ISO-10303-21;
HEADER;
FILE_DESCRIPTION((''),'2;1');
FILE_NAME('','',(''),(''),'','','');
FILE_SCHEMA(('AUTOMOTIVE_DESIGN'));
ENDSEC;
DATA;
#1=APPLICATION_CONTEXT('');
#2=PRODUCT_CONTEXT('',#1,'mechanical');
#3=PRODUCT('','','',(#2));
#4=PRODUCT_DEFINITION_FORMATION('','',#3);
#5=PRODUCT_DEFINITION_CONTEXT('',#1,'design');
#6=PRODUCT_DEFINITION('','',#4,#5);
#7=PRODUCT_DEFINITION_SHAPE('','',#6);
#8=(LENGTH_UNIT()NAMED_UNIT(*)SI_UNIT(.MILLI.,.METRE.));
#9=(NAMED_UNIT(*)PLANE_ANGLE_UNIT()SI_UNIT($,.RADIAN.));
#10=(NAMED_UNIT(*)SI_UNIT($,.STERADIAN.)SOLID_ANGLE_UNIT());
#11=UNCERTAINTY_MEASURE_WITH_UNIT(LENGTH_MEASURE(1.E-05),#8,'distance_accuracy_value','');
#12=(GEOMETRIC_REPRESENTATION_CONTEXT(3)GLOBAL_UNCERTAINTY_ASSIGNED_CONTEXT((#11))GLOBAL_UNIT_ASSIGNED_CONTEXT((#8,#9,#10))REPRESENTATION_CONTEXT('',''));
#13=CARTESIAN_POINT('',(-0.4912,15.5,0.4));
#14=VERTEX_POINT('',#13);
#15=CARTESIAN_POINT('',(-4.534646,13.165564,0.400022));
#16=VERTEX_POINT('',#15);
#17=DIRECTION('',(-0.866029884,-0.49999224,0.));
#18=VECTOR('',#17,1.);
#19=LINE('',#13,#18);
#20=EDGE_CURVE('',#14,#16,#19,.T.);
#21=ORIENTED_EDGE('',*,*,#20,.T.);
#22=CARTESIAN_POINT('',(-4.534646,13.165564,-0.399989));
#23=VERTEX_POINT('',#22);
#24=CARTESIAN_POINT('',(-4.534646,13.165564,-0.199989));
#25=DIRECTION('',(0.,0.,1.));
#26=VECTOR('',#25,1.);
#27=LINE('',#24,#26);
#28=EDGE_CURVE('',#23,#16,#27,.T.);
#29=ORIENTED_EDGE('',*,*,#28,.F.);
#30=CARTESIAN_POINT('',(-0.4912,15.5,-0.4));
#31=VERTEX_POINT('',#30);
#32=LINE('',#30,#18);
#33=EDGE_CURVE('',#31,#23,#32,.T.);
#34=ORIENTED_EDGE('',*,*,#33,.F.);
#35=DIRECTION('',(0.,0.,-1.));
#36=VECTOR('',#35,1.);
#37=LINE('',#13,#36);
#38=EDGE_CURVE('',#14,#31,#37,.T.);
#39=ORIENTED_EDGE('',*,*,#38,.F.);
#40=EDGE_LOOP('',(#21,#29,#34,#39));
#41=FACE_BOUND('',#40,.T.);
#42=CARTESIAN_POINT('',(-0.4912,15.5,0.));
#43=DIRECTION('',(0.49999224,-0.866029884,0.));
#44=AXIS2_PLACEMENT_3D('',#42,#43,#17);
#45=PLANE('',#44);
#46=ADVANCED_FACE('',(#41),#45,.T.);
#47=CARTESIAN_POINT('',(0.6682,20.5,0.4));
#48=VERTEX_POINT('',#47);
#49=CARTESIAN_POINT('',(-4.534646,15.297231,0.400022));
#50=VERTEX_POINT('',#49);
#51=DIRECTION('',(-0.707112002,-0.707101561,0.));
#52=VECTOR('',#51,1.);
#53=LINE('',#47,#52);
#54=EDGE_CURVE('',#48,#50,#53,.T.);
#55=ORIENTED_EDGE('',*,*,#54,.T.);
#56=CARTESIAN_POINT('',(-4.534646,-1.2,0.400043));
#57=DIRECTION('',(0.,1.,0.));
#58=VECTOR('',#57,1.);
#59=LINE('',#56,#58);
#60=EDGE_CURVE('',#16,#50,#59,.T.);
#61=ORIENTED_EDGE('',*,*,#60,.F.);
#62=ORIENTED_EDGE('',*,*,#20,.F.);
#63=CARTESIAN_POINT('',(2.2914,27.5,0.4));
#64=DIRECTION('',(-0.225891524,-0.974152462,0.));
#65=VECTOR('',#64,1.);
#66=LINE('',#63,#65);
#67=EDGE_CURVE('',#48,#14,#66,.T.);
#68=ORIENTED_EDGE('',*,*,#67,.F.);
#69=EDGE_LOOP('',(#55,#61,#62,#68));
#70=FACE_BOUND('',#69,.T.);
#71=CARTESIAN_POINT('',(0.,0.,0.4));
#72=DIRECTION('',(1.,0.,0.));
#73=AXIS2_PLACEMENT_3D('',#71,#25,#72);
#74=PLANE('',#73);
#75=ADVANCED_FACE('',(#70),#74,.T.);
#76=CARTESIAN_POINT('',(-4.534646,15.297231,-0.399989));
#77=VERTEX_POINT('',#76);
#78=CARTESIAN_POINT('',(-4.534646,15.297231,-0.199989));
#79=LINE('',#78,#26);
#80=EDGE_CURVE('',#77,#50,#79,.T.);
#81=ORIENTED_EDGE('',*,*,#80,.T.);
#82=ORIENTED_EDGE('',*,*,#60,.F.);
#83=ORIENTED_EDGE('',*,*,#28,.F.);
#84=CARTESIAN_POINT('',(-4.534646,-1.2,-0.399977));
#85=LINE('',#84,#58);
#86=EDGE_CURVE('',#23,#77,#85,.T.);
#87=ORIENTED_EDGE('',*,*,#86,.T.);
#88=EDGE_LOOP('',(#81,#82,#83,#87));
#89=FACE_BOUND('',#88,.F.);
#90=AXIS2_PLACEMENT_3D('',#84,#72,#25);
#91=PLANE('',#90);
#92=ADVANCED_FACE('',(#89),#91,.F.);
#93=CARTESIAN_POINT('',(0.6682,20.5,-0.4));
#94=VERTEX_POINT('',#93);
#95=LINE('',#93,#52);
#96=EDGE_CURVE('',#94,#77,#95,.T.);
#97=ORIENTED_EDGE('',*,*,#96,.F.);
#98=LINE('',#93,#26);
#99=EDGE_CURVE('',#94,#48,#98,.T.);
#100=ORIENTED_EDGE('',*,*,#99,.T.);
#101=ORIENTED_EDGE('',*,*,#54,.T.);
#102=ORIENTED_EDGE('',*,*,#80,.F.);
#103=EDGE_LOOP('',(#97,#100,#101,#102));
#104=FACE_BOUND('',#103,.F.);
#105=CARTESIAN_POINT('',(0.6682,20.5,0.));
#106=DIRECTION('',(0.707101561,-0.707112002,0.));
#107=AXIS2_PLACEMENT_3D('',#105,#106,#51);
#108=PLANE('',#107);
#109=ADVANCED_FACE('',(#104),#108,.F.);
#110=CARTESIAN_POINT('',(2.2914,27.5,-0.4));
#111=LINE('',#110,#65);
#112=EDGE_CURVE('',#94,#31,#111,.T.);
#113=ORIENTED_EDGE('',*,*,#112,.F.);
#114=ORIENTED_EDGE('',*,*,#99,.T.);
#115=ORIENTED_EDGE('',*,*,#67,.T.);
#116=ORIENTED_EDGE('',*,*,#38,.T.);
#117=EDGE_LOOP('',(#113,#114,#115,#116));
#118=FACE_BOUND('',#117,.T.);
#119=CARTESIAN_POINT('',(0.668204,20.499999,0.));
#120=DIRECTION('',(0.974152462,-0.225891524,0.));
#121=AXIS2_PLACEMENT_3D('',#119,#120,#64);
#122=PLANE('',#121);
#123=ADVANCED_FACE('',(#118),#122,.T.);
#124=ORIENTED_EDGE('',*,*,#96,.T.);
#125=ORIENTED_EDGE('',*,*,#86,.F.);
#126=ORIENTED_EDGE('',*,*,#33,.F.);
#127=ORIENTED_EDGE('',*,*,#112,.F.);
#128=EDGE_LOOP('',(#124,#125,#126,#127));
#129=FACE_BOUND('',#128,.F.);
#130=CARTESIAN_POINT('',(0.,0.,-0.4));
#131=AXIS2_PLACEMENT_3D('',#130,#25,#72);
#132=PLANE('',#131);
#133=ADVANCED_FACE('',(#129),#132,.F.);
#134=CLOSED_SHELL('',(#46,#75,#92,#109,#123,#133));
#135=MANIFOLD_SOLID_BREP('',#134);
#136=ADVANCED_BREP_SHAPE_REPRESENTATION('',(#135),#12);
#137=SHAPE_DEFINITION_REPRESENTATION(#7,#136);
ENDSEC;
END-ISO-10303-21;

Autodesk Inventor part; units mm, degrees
ref_plane "YZ Plane" through (0, 0, 0) normal (1, 0, 0) x (0, 1, 0)
ref_plane "XZ Plane" through (0, 0, 0) normal (0, 1, 0) x (-1, 0, 0)
sketch "Sketch1" plane through (0, 0, 0) normal (0, 0, 1) x (1, 0, 0)
  line L0 (3.7914, 27.5) -> (2.2914, 27.5) projected
  line L1 (2.2914, 27.5) -> (-3.9695, 0.5) projected
  line L2 (-3.9695, 0.5) -> (-0.9695, 0.5) projected
  line L3 (-0.9695, 0.5) -> (3.7914, 27.5) projected
  line L4 (-0.4912, 15.5) -> (-6.1042, 12.2594)
  line L5 (0.6682, 20.5) -> (-6.1042, 13.7277)
  line L6 (-0.4912, 15.5) -> (0.6682, 20.5)
  line L7 (-6.1042, 12.2594) -> (-6.1042, 13.7277)
  point P0 (0, 0)
  dimension "d0" = 30
  dimension "d1" = 45
  dimension "d2" = 15
  dimension "d3" = 20
extrude "Extrusion1" add sketch "Sketch1" along normal mid plane 0.8 contours L1 L4 L7 L5
ref_plane "Work Plane1" through (-6.8792, -1.2, 1.7678) normal (0, -1, 0) x (-0.7071068, 0, -0.7071068)
sketch "Sketch2" plane through (-6.8792, -1.2, 1.7678) normal (0, -1, 0) x (-0.7071068, 0, -0.7071068)
  line L0 (-5, 7.5) -> (-5, -7.5) projected
  line L1 (-5, -7.5) -> (5, -7.5) projected
  line L2 (5, -7.5) -> (5, 7.5) projected
  line L3 (5, 7.5) -> (-5, 7.5) projected
  line L4 (5, 7.5) -> (-5, -7.5)
  line L5 (5, -7.5) -> (0, 0)
  line L6 (0.9848, 2.0809) -> (-3.804, 6.8697) projected
  line L7 (-0.125, 3.1907) -> (-0.6907, 2.625)
  line L8 (0.4191, 1.5152) -> (-3.5499, 5.4842) projected
  line L9 (0, 0) -> (-5, 7.5)
  line L10 (0.9848, 2.0809) -> (-0.125, 3.1907)
  line L11 (0.4191, 1.5152) -> (-0.6907, 2.625)
  line L12 (0.9848, 2.0809) -> (0.4191, 1.5152)
  point P0 (-3.6144, 6.1144)
  dimension "d6" = 0.125
extrude "Extrusion2" cut sketch "Sketch2" against normal through all contours L12 L8 L7 L6
properties part number "LegConnector"
